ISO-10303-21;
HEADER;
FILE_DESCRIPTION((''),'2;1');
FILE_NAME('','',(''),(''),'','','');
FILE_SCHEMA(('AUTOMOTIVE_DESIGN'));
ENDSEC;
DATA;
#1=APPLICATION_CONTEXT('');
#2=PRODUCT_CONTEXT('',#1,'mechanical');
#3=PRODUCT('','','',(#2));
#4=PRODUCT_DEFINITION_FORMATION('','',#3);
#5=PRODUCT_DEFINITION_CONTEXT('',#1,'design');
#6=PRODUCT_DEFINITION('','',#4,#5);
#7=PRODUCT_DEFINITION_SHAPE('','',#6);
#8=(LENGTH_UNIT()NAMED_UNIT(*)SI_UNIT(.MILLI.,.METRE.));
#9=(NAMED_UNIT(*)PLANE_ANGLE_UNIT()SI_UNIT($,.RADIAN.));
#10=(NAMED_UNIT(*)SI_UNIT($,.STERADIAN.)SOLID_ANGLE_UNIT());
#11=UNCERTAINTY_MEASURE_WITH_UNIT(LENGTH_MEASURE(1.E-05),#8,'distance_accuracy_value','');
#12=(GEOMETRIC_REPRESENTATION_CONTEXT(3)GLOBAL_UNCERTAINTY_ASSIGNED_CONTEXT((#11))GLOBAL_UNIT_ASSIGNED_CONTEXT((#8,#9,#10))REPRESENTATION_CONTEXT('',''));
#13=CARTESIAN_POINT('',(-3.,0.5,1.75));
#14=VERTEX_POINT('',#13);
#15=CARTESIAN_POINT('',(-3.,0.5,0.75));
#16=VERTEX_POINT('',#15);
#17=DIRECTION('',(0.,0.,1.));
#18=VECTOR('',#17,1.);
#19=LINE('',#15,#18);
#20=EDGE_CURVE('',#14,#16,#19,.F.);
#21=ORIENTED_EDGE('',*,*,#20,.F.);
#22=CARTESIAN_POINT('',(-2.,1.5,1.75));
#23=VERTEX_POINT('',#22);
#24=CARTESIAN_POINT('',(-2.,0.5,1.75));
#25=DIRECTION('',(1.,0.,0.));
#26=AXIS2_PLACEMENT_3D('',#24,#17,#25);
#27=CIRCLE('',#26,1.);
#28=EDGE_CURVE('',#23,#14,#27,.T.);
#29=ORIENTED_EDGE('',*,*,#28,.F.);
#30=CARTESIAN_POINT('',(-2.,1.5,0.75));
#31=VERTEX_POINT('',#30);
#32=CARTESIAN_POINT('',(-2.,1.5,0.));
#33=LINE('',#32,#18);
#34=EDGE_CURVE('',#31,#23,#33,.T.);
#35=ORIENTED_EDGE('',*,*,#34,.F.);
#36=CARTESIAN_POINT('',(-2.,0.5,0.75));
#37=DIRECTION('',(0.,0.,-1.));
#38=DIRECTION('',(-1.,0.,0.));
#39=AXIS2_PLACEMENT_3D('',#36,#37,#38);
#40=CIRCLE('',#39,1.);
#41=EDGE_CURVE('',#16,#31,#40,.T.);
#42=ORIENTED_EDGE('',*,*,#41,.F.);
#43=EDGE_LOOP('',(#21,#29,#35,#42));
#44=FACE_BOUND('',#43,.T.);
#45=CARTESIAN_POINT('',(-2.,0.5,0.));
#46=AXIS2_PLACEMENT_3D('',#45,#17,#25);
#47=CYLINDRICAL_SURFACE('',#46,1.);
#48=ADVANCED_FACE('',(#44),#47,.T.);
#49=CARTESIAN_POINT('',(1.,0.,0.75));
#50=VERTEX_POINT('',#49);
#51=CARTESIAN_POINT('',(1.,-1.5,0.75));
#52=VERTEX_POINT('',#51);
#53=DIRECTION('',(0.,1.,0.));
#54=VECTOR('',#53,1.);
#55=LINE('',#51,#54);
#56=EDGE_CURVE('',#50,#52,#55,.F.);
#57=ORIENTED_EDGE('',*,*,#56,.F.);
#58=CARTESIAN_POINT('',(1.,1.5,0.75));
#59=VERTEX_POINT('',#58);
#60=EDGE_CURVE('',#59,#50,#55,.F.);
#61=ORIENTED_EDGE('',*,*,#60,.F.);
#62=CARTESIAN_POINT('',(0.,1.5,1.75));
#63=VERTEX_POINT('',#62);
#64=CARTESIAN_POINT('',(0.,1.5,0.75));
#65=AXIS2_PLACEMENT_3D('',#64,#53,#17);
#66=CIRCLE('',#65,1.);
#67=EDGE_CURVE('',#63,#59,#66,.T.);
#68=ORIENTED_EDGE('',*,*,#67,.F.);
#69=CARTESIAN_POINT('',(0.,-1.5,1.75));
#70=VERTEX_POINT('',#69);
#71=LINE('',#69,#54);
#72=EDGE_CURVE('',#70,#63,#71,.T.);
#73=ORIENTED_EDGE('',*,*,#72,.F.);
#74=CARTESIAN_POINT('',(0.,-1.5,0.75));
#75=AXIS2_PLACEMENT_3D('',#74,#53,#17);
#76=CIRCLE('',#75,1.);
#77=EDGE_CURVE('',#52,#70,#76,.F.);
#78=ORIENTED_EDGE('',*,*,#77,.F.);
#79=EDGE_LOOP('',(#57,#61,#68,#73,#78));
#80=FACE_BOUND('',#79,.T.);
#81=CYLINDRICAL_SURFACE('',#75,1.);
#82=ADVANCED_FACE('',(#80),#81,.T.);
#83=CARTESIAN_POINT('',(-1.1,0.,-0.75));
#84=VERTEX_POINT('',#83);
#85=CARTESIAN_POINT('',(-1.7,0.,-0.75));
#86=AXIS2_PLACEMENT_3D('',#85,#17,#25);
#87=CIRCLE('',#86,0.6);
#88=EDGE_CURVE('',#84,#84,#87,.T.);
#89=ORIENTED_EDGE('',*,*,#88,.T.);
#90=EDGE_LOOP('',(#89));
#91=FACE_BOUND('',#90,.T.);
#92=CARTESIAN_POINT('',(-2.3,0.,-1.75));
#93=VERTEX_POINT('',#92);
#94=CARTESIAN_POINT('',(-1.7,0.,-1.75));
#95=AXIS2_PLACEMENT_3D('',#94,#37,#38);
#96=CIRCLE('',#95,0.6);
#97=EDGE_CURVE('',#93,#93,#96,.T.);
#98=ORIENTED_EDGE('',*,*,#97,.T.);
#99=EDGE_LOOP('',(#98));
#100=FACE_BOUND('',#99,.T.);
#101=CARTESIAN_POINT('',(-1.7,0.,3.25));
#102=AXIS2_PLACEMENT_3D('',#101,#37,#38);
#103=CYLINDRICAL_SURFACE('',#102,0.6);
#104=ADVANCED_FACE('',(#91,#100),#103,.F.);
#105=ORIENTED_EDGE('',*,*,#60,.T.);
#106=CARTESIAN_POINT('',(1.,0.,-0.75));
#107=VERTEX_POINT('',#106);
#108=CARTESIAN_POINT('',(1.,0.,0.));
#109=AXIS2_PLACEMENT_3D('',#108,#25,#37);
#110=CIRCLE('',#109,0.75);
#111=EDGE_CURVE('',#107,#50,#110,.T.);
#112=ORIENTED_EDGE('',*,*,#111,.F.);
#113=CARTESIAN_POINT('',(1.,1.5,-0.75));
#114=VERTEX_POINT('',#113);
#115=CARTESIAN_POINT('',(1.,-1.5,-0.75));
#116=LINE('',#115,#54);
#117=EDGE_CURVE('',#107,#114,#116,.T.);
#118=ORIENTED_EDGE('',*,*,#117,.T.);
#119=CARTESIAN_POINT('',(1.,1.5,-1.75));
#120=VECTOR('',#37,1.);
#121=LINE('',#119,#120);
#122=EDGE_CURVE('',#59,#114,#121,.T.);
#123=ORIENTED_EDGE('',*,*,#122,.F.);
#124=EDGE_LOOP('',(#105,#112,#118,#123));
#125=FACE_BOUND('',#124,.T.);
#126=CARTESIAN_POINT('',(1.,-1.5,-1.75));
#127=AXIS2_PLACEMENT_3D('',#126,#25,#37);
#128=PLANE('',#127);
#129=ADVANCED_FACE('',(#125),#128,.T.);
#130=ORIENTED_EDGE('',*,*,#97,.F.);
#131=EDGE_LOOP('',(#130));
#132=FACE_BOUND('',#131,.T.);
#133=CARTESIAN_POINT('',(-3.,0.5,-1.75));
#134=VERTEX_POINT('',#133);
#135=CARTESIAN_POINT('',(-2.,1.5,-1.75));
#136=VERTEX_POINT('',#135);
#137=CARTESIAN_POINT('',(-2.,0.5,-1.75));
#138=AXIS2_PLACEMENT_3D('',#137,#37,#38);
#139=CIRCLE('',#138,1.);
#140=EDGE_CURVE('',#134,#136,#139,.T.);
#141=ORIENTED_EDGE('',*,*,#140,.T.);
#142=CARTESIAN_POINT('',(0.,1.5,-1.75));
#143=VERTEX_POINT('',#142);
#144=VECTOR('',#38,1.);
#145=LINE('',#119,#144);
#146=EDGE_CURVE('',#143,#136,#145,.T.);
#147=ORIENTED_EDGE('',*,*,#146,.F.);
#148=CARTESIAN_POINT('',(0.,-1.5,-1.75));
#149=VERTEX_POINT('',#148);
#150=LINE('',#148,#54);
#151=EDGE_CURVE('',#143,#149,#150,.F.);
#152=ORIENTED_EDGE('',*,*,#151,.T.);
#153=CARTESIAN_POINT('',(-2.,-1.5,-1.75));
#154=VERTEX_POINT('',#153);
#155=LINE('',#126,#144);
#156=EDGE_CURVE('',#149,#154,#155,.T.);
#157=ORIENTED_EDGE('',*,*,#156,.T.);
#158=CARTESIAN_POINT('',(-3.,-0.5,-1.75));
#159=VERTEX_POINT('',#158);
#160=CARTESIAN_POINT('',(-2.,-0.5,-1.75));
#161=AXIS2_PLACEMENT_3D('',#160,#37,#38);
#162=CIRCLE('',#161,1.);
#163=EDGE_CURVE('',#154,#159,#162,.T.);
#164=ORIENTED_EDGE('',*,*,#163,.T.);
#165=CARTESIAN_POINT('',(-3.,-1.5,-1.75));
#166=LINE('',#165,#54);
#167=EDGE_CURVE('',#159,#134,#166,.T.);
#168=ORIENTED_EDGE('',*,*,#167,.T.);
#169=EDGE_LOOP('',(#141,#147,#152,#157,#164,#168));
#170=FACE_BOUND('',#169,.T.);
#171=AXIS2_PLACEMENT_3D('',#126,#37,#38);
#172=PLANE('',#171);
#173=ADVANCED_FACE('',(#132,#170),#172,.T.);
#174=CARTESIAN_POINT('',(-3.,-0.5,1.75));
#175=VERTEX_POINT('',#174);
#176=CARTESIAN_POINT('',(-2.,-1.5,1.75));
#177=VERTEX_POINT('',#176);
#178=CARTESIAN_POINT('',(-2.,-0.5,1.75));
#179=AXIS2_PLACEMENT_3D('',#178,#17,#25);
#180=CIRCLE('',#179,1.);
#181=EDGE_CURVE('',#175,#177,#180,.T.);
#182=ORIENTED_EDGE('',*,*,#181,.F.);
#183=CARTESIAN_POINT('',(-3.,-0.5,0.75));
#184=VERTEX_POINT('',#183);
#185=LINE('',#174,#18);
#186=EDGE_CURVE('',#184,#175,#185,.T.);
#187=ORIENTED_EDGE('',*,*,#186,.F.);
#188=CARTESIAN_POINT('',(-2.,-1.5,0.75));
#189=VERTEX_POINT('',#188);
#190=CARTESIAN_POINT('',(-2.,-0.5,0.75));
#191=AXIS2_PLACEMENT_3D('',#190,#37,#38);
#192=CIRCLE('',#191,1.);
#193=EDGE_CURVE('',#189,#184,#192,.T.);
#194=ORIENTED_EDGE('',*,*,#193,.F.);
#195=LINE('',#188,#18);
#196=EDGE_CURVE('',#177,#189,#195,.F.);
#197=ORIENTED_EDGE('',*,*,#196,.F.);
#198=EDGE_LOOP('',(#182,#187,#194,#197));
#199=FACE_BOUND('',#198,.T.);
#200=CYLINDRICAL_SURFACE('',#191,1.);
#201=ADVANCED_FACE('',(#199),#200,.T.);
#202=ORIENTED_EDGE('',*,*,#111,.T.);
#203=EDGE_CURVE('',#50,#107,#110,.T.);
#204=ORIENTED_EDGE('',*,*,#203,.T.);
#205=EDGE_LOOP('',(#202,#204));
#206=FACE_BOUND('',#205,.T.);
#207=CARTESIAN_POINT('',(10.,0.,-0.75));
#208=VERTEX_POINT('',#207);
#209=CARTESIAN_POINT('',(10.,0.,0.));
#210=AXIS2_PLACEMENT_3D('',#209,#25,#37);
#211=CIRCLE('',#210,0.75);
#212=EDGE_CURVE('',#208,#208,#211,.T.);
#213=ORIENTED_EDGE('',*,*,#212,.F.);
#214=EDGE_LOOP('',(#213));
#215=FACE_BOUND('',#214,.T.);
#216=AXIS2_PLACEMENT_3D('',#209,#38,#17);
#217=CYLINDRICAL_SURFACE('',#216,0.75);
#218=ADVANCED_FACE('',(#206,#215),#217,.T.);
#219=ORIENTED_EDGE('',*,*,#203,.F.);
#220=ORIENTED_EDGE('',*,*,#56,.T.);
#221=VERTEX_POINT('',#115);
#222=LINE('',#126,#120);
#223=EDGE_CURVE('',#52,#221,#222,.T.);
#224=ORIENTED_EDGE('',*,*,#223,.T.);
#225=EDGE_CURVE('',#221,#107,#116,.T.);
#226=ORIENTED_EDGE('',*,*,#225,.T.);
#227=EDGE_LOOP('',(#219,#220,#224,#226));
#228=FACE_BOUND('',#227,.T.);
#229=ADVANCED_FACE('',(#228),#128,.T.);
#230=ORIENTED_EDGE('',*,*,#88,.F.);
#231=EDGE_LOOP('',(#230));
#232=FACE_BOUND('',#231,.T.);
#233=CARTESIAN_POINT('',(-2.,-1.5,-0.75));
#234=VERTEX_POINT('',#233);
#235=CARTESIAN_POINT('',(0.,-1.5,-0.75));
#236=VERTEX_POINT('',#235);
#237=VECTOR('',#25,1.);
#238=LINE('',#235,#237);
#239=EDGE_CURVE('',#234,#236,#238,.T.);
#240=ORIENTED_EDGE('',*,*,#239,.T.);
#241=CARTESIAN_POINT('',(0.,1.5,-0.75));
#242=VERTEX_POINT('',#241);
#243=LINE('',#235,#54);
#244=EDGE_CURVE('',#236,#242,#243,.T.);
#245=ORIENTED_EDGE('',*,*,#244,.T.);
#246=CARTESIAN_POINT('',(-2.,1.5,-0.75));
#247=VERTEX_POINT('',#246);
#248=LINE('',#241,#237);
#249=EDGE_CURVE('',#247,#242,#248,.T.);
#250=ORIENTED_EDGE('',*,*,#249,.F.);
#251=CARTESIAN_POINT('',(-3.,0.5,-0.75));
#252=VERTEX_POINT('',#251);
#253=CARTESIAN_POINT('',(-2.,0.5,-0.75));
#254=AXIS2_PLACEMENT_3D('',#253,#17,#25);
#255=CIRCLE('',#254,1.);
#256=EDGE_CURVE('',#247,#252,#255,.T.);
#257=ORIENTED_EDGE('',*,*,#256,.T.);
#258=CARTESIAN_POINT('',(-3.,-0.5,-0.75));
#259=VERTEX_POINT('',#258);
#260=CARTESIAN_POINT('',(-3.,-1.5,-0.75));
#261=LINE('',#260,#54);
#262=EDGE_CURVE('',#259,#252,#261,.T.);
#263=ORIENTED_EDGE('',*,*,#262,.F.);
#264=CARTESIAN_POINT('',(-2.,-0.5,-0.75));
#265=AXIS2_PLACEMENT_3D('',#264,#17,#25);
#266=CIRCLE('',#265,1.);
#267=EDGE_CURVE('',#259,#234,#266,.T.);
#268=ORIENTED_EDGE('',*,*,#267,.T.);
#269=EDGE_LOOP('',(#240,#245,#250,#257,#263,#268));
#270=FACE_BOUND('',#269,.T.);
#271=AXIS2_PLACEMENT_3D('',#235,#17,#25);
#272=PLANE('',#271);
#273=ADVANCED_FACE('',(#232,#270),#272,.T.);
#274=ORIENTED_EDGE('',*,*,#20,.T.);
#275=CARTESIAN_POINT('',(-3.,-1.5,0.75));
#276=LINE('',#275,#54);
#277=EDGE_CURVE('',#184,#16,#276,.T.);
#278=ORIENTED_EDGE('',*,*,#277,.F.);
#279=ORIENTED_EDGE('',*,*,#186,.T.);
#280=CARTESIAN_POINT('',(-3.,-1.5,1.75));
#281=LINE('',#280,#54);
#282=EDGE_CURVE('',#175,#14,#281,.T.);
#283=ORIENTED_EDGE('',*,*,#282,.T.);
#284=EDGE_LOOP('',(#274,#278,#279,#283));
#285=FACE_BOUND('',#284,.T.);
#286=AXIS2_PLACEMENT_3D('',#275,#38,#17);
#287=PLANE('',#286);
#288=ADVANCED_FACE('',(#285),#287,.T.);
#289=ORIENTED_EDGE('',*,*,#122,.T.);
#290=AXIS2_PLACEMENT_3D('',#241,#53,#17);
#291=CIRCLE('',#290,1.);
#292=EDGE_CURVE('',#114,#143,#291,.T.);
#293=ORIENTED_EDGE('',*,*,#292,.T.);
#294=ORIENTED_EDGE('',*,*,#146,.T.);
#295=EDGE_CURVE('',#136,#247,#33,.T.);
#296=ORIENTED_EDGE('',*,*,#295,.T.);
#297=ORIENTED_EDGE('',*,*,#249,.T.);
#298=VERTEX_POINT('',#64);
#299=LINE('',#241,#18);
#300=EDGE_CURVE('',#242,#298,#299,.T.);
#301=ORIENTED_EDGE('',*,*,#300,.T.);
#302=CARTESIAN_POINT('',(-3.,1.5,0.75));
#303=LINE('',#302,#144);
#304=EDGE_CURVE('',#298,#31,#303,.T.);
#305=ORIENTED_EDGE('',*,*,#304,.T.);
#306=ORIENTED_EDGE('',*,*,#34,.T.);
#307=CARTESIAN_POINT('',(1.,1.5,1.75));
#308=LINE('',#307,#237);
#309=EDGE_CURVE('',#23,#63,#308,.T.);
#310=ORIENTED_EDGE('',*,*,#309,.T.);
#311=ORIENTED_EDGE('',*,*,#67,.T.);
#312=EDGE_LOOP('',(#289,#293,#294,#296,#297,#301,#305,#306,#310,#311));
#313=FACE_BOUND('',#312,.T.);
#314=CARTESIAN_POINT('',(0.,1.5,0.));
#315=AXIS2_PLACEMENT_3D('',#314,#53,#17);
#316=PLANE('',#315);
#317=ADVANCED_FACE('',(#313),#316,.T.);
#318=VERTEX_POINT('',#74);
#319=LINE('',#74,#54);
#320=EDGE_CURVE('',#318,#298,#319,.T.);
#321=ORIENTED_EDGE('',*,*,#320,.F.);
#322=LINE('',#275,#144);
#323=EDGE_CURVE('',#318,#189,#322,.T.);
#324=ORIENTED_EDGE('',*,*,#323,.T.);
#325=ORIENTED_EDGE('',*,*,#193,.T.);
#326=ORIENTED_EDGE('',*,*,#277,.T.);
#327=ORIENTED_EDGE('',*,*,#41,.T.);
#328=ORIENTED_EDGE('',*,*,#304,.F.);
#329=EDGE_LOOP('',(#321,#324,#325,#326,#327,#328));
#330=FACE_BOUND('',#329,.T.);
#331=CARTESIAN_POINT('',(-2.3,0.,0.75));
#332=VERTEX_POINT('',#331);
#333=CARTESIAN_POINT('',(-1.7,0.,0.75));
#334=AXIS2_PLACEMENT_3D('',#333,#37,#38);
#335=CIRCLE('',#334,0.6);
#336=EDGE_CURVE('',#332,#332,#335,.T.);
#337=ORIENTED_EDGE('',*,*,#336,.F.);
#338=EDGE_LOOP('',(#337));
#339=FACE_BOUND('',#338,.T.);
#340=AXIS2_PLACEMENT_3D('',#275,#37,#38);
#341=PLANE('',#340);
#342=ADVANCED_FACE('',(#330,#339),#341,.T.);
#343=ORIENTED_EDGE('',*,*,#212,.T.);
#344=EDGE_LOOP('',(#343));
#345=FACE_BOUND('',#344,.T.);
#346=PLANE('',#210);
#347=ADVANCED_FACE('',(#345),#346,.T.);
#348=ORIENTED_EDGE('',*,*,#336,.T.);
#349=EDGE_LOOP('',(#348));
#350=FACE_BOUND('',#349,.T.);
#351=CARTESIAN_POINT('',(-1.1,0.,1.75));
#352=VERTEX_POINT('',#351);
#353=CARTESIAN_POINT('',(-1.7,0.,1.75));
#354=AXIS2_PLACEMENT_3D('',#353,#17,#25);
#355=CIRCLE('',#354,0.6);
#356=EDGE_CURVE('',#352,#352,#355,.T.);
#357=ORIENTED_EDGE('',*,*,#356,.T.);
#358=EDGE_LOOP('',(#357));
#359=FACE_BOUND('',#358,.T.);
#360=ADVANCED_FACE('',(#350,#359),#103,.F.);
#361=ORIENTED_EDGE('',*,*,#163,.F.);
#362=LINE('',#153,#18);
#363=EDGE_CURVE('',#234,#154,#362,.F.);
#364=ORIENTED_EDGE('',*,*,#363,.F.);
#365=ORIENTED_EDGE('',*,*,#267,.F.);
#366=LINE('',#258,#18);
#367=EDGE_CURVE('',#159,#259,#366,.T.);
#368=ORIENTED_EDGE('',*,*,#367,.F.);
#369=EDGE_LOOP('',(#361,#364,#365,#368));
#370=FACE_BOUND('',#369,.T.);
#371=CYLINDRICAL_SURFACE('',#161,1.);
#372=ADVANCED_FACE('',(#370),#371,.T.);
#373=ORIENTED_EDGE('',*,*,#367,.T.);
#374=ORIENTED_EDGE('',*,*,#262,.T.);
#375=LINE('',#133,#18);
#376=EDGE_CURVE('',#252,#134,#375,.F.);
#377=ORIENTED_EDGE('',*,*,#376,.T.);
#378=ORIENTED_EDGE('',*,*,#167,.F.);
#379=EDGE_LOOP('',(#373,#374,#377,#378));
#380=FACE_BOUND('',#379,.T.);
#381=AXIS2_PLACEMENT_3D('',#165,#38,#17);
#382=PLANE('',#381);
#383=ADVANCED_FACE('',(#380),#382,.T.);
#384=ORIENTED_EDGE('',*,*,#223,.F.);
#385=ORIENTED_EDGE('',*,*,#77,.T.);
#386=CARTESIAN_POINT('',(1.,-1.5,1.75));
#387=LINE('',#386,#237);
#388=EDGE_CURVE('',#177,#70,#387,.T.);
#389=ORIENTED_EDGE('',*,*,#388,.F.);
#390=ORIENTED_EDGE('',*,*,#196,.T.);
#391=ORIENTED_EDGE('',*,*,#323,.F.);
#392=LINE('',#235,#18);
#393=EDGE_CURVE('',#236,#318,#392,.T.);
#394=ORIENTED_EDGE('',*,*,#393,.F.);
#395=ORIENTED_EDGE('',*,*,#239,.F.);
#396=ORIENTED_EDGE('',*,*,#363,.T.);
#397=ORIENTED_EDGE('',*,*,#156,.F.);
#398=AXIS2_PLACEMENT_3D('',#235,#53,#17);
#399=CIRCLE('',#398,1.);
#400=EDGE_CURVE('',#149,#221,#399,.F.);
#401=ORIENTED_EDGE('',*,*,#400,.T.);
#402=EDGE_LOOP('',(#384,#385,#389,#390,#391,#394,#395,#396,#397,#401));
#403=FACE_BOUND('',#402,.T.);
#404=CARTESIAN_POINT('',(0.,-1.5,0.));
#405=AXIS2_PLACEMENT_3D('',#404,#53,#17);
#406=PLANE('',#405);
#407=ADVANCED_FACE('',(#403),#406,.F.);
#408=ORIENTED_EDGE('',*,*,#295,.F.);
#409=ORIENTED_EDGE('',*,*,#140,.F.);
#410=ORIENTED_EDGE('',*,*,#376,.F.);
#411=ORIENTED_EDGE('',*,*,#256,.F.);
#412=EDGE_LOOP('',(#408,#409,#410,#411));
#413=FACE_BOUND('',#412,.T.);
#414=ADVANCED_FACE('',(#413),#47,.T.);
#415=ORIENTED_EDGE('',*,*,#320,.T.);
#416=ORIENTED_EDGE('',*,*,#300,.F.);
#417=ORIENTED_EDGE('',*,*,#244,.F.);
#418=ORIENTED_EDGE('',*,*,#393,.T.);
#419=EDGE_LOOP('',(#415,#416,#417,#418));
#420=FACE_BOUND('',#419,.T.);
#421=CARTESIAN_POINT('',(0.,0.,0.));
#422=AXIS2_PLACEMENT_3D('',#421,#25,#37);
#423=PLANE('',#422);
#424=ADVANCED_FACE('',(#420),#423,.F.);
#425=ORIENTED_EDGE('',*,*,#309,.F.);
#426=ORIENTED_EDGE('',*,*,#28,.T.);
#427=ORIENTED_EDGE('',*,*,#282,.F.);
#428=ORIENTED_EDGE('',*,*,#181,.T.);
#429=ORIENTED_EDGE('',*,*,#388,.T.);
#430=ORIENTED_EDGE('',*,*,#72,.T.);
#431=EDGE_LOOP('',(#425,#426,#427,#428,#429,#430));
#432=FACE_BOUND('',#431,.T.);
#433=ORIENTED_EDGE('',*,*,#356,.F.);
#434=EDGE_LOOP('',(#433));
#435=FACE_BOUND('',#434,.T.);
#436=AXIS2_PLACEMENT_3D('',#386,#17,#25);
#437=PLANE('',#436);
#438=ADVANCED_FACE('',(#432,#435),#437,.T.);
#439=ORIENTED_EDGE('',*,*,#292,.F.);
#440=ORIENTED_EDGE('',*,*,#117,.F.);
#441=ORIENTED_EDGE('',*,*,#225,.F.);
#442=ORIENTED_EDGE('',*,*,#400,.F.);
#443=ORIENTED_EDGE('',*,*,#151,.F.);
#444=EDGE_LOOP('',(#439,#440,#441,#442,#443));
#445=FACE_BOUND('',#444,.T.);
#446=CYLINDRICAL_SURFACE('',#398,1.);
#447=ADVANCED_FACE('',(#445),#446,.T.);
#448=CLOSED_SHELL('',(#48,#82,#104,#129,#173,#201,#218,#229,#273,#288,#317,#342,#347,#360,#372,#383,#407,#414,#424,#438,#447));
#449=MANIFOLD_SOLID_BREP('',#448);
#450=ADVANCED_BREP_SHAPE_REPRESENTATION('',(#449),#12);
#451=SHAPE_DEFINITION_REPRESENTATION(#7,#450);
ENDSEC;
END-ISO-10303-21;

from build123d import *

# Parameters (mm, degrees)
SKETCH1_R                = 0.75
BOSS_EXTRUDE1_DEPTH      = 10
BOSS_EXTRUDE2_DEPTH      = 1.5
BOSS_EXTRUDE2_DEPTH_BACK = 1.5
FILLET1_R                = 1
SKETCH3_R                = 0.6
CUT_EXTRUDE1_DEPTH       = 5


with BuildPart() as part:
    # Sketch1 → Boss-Extrude1 (new body)
    with BuildSketch(Plane(origin=(0, 0, 0), x_dir=(0, 0, -1), z_dir=(1, 0, 0))):
        Circle(SKETCH1_R)
    extrude(amount=BOSS_EXTRUDE1_DEPTH)

    # Sketch2 → Boss-Extrude2 (add, two sides: drawn at the far end of the back side and taken through both)
    with BuildSketch(Plane(origin=(0, 0, 0), x_dir=(1, 0, 0), z_dir=(0, 1, 0)).offset(-BOSS_EXTRUDE2_DEPTH_BACK)):
        Polygon((1, 1.75), (1, -1.75), (-3, -1.75), (-3, -0.75), (0, -0.75), (0, 0.75), (-3, 0.75), (-3, 1.75), align=None)
    extrude(amount=BOSS_EXTRUDE2_DEPTH + BOSS_EXTRUDE2_DEPTH_BACK)

    # Fillet1
    fillet1_edges = [part.edges().sort_by_distance(p)[0] for p in [
        (-3, 1.5, 1.25),
        (-3, 1.5, -1.25),
        (-3, -1.5, -1.25),
        (1, 0, -1.75),
        (1, 0, 1.75),
        (-3, -1.5, 1.25),
    ]]
    fillet(fillet1_edges, radius=FILLET1_R - 0.0001)  # a hair under: the kernel refuses the full size

    # Sketch3 → Cut-Extrude1 (cut)
    with BuildSketch(Plane(origin=(0, 0, -1.75), x_dir=(-1, 0, 0), z_dir=(0, 0, -1))):
        with Locations((1.7, 0)):
            Circle(SKETCH3_R)
    extrude(amount=-CUT_EXTRUDE1_DEPTH, mode=Mode.SUBTRACT)


solid = part.part
